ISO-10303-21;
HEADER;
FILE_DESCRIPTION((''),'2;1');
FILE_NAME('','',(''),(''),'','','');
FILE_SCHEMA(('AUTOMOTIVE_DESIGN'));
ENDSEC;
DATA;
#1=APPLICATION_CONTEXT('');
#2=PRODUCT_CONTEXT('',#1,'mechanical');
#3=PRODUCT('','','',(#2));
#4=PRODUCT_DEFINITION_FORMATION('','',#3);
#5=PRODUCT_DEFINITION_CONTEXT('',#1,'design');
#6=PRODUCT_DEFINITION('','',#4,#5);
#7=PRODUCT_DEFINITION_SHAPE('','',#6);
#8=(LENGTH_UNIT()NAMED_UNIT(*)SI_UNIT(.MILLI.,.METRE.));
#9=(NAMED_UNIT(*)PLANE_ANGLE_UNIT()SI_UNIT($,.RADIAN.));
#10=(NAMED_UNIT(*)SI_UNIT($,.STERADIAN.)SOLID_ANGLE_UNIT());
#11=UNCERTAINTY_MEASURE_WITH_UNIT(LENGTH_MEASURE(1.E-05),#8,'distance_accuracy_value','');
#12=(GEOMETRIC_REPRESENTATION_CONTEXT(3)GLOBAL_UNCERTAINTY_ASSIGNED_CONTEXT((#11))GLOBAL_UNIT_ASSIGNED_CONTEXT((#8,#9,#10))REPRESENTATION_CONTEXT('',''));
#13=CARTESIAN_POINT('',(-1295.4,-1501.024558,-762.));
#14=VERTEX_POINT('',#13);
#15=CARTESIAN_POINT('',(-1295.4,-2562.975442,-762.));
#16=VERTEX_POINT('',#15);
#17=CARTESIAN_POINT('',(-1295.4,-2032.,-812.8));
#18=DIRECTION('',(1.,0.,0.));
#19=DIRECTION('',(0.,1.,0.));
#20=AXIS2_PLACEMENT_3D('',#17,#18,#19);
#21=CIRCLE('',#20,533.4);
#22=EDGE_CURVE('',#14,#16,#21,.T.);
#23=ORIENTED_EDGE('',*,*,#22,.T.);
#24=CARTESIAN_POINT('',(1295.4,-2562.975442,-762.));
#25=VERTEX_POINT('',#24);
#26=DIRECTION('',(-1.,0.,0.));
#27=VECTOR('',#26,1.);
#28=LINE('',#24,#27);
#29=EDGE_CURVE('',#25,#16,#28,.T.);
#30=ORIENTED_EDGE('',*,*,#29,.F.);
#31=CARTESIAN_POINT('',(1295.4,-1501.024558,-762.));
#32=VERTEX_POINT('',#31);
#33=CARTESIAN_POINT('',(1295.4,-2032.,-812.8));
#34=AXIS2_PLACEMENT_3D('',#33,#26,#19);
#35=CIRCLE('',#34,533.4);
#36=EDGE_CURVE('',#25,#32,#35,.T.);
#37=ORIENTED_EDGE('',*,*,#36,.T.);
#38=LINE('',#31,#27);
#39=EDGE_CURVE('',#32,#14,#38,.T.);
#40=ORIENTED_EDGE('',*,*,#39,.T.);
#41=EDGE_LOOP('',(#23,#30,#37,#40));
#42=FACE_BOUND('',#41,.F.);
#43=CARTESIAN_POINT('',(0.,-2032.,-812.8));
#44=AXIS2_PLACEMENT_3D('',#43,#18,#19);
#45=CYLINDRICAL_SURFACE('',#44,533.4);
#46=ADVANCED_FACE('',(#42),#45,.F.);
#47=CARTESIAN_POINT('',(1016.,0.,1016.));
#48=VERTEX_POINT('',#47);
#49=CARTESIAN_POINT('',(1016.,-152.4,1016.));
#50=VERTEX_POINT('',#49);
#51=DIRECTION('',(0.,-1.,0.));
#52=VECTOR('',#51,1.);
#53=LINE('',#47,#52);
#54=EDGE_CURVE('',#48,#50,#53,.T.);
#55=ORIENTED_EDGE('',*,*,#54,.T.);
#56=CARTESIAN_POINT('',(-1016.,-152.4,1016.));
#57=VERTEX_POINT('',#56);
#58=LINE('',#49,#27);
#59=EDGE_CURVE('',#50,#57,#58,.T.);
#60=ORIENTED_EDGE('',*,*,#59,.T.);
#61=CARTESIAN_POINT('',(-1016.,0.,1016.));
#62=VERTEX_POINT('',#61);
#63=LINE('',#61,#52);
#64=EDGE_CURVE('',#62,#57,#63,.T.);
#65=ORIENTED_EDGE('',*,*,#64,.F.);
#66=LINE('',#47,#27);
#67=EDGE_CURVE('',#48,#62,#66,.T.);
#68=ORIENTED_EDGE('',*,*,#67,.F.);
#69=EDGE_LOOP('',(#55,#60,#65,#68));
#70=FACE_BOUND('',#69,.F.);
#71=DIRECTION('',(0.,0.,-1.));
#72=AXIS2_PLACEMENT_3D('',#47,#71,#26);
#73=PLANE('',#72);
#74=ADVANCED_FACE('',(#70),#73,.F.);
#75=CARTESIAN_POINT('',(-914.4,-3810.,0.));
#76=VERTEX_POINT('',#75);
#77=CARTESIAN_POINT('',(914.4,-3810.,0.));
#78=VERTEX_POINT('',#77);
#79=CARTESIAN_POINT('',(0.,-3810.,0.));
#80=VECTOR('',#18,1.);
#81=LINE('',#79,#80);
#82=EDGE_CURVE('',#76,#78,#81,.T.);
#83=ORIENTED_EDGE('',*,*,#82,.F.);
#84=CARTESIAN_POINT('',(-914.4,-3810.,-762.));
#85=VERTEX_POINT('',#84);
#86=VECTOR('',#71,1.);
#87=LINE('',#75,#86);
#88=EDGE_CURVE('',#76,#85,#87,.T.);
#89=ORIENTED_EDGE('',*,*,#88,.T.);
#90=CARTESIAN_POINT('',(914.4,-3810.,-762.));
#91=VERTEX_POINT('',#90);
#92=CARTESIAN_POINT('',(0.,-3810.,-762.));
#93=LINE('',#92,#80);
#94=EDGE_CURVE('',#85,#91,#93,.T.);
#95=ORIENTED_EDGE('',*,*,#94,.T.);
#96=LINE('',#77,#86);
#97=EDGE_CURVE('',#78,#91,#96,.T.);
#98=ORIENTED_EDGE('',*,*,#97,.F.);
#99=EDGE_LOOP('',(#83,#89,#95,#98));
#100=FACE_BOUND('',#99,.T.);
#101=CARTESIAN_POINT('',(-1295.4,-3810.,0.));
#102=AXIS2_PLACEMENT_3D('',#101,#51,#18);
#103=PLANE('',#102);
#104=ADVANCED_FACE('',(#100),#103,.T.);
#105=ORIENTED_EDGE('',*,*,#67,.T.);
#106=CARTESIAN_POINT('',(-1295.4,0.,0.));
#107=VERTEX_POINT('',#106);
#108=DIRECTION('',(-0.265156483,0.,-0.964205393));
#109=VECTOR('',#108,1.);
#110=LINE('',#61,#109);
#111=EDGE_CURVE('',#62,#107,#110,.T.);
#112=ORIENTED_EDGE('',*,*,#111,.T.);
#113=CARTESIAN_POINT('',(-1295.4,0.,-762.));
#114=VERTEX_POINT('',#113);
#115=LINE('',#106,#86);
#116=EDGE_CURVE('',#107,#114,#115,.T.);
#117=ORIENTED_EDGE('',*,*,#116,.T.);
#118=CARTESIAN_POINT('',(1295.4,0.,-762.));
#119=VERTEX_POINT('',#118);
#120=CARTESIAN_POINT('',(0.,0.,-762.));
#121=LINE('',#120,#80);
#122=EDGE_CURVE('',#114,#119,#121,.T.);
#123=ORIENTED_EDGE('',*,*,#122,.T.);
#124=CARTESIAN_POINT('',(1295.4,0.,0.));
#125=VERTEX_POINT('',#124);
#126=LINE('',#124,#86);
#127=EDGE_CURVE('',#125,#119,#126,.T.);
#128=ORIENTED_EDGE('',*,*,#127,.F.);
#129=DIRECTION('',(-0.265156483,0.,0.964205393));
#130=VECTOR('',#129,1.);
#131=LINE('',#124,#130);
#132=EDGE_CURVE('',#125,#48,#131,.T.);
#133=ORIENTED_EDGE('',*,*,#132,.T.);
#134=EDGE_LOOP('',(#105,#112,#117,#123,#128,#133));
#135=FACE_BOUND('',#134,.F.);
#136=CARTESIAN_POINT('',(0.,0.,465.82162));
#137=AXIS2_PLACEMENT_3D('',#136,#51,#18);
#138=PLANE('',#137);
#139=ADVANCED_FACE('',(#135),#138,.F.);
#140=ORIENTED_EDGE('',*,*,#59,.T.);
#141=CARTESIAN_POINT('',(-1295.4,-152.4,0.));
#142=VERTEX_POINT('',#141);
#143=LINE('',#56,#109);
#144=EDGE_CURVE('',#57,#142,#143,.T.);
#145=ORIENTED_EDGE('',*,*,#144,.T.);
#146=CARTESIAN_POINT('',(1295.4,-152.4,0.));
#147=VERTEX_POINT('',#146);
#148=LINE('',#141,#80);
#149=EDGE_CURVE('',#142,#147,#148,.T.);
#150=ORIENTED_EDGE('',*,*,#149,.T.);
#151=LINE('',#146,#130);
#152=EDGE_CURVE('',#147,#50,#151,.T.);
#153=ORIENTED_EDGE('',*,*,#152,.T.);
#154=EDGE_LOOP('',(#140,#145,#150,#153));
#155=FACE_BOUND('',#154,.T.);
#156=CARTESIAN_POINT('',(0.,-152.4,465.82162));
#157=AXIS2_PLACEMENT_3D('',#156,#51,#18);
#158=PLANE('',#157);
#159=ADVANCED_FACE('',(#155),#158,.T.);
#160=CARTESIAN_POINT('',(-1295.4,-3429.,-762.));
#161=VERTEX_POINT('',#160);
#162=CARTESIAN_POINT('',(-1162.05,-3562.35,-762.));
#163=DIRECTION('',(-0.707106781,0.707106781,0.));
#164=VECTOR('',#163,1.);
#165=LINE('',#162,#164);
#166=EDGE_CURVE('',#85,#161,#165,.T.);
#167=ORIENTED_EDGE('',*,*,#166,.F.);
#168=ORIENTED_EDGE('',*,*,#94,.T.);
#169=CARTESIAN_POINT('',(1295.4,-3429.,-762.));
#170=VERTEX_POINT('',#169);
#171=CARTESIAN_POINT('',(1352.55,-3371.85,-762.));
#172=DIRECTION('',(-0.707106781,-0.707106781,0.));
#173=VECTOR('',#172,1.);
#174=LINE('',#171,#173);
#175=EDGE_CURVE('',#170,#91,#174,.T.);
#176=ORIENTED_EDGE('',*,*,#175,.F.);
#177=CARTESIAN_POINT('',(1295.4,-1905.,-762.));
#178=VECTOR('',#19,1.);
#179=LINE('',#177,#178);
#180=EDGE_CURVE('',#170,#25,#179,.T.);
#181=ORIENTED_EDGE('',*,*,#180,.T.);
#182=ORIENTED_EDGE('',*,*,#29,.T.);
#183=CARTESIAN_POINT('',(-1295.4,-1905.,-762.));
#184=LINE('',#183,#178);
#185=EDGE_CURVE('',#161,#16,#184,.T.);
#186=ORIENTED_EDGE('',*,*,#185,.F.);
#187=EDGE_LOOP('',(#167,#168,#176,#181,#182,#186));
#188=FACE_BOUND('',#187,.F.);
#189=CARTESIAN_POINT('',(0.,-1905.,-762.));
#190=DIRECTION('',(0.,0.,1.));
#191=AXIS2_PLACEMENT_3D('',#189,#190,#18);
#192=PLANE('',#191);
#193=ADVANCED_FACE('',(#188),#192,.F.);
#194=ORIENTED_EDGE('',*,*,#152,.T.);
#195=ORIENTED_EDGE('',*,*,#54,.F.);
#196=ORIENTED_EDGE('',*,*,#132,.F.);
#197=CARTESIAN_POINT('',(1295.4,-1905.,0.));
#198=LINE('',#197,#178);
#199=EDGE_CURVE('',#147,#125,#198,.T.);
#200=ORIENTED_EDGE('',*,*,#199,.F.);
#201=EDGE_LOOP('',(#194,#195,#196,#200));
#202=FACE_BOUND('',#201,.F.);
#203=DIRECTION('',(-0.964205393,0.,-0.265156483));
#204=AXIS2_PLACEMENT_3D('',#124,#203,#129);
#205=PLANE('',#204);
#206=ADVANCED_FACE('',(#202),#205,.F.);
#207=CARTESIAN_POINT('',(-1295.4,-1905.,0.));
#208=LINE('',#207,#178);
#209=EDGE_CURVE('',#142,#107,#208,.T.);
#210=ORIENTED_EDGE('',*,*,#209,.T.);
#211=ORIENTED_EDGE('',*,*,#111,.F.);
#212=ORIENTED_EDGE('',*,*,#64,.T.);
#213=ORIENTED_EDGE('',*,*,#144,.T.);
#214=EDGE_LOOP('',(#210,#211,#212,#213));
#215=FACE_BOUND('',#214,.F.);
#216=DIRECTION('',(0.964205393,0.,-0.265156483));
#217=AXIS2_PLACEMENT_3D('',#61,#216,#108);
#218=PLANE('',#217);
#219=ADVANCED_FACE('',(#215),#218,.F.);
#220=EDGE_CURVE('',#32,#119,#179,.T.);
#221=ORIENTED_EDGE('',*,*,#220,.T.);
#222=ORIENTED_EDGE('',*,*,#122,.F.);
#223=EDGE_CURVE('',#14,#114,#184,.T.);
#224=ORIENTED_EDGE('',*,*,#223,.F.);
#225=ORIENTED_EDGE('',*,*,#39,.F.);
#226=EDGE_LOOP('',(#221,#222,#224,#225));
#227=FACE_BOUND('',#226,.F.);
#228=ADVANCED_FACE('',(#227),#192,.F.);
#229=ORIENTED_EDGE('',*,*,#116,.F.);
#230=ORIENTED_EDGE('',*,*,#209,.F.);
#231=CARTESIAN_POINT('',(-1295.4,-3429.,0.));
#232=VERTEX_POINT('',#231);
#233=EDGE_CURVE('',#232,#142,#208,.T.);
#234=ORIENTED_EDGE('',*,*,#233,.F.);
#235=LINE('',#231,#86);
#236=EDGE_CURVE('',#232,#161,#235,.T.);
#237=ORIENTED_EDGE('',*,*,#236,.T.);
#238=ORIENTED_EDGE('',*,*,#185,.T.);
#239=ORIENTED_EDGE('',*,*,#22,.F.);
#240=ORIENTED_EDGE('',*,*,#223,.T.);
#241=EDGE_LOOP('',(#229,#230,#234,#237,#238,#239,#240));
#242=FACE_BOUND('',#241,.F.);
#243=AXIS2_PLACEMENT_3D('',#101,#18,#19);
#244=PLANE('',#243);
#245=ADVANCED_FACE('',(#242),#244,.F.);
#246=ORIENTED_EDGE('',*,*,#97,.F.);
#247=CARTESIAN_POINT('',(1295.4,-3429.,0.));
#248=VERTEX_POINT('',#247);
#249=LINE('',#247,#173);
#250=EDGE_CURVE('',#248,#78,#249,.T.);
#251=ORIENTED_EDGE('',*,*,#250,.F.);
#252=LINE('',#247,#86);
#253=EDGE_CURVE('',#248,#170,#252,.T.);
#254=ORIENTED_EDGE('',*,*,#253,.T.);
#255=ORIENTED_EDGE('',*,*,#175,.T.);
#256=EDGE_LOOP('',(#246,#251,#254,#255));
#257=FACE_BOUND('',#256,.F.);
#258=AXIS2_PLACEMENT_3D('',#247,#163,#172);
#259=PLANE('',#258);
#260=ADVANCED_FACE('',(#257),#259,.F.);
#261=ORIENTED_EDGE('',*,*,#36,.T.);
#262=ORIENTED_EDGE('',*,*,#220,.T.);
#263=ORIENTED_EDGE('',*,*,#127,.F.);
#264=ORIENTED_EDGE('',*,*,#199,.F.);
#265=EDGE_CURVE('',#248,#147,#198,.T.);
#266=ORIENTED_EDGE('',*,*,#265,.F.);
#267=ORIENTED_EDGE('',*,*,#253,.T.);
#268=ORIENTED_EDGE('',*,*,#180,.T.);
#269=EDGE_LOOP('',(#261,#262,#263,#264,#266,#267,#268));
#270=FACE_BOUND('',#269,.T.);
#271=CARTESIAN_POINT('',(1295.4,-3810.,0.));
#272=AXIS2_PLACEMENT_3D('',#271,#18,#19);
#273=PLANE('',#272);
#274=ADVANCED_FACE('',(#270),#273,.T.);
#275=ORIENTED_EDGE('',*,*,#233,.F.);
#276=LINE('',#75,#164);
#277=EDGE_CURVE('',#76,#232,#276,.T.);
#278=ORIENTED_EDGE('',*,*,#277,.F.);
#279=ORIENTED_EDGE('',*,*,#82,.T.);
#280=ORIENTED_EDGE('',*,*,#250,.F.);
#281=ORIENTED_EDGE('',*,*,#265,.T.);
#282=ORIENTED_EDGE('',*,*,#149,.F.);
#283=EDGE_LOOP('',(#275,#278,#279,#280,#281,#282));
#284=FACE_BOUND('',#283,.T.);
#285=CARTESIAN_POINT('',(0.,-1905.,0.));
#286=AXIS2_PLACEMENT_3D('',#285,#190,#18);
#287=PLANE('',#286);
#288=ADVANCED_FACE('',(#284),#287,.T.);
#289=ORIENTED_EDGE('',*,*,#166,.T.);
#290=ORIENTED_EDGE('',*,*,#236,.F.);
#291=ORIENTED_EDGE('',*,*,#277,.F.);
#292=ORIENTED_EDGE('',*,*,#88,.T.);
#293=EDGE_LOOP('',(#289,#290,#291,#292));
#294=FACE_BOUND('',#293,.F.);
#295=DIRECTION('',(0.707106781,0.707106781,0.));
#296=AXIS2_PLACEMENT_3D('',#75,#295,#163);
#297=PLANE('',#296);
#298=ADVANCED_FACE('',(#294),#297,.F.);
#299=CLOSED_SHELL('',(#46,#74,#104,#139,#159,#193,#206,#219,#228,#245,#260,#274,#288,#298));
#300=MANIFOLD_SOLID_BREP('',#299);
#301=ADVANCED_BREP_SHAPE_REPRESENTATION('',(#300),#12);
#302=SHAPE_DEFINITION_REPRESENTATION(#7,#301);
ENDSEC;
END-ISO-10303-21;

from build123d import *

# Parameters (mm, degrees)
F3_W          = 2590.8
F3_H          = 3810
F4_DEPTH      = 762
F5_R          = 533.4
F6_DEPTH      = 1295.401
F6_DEPTH_BACK = 1295.401
F8_DEPTH      = 762.001
F10_DEPTH     = 152.4


with BuildPart() as f4:
    # F3 (on Top) → F4 (new body)
    with BuildSketch(Plane.XY):
        with Locations((0, -1905)):
            Rectangle(F3_W, F3_H)
    extrude(amount=-F4_DEPTH)

    # F5 (on Right) → F6 (cut, two sides)
    with BuildSketch(Plane.YZ) as f6_sk:
        with Locations((-2032, -812.8)):
            Circle(F5_R)
    extrude(amount=-F6_DEPTH, mode=Mode.SUBTRACT)
    extrude(f6_sk.sketch, amount=F6_DEPTH_BACK, mode=Mode.SUBTRACT)

    # F7 (on Top) → F8 (cut, through all)
    with BuildSketch(Plane.XY):
        Polygon((1295.4, -3810), (1295.4, -3429), (914.4, -3810), align=None)
        Polygon((-1295.4, -3810), (-914.4, -3810), (-1295.4, -3429), align=None)
    extrude(amount=-F8_DEPTH, mode=Mode.SUBTRACT)

    # F9 (on Front) → F10 (join)
    with BuildSketch(Plane.XZ):
        Polygon((-1016, 1016), (-1295.4, 0), (1295.4, 0), (1016, 1016), align=None)
    extrude(amount=F10_DEPTH)


solid = f4.part
